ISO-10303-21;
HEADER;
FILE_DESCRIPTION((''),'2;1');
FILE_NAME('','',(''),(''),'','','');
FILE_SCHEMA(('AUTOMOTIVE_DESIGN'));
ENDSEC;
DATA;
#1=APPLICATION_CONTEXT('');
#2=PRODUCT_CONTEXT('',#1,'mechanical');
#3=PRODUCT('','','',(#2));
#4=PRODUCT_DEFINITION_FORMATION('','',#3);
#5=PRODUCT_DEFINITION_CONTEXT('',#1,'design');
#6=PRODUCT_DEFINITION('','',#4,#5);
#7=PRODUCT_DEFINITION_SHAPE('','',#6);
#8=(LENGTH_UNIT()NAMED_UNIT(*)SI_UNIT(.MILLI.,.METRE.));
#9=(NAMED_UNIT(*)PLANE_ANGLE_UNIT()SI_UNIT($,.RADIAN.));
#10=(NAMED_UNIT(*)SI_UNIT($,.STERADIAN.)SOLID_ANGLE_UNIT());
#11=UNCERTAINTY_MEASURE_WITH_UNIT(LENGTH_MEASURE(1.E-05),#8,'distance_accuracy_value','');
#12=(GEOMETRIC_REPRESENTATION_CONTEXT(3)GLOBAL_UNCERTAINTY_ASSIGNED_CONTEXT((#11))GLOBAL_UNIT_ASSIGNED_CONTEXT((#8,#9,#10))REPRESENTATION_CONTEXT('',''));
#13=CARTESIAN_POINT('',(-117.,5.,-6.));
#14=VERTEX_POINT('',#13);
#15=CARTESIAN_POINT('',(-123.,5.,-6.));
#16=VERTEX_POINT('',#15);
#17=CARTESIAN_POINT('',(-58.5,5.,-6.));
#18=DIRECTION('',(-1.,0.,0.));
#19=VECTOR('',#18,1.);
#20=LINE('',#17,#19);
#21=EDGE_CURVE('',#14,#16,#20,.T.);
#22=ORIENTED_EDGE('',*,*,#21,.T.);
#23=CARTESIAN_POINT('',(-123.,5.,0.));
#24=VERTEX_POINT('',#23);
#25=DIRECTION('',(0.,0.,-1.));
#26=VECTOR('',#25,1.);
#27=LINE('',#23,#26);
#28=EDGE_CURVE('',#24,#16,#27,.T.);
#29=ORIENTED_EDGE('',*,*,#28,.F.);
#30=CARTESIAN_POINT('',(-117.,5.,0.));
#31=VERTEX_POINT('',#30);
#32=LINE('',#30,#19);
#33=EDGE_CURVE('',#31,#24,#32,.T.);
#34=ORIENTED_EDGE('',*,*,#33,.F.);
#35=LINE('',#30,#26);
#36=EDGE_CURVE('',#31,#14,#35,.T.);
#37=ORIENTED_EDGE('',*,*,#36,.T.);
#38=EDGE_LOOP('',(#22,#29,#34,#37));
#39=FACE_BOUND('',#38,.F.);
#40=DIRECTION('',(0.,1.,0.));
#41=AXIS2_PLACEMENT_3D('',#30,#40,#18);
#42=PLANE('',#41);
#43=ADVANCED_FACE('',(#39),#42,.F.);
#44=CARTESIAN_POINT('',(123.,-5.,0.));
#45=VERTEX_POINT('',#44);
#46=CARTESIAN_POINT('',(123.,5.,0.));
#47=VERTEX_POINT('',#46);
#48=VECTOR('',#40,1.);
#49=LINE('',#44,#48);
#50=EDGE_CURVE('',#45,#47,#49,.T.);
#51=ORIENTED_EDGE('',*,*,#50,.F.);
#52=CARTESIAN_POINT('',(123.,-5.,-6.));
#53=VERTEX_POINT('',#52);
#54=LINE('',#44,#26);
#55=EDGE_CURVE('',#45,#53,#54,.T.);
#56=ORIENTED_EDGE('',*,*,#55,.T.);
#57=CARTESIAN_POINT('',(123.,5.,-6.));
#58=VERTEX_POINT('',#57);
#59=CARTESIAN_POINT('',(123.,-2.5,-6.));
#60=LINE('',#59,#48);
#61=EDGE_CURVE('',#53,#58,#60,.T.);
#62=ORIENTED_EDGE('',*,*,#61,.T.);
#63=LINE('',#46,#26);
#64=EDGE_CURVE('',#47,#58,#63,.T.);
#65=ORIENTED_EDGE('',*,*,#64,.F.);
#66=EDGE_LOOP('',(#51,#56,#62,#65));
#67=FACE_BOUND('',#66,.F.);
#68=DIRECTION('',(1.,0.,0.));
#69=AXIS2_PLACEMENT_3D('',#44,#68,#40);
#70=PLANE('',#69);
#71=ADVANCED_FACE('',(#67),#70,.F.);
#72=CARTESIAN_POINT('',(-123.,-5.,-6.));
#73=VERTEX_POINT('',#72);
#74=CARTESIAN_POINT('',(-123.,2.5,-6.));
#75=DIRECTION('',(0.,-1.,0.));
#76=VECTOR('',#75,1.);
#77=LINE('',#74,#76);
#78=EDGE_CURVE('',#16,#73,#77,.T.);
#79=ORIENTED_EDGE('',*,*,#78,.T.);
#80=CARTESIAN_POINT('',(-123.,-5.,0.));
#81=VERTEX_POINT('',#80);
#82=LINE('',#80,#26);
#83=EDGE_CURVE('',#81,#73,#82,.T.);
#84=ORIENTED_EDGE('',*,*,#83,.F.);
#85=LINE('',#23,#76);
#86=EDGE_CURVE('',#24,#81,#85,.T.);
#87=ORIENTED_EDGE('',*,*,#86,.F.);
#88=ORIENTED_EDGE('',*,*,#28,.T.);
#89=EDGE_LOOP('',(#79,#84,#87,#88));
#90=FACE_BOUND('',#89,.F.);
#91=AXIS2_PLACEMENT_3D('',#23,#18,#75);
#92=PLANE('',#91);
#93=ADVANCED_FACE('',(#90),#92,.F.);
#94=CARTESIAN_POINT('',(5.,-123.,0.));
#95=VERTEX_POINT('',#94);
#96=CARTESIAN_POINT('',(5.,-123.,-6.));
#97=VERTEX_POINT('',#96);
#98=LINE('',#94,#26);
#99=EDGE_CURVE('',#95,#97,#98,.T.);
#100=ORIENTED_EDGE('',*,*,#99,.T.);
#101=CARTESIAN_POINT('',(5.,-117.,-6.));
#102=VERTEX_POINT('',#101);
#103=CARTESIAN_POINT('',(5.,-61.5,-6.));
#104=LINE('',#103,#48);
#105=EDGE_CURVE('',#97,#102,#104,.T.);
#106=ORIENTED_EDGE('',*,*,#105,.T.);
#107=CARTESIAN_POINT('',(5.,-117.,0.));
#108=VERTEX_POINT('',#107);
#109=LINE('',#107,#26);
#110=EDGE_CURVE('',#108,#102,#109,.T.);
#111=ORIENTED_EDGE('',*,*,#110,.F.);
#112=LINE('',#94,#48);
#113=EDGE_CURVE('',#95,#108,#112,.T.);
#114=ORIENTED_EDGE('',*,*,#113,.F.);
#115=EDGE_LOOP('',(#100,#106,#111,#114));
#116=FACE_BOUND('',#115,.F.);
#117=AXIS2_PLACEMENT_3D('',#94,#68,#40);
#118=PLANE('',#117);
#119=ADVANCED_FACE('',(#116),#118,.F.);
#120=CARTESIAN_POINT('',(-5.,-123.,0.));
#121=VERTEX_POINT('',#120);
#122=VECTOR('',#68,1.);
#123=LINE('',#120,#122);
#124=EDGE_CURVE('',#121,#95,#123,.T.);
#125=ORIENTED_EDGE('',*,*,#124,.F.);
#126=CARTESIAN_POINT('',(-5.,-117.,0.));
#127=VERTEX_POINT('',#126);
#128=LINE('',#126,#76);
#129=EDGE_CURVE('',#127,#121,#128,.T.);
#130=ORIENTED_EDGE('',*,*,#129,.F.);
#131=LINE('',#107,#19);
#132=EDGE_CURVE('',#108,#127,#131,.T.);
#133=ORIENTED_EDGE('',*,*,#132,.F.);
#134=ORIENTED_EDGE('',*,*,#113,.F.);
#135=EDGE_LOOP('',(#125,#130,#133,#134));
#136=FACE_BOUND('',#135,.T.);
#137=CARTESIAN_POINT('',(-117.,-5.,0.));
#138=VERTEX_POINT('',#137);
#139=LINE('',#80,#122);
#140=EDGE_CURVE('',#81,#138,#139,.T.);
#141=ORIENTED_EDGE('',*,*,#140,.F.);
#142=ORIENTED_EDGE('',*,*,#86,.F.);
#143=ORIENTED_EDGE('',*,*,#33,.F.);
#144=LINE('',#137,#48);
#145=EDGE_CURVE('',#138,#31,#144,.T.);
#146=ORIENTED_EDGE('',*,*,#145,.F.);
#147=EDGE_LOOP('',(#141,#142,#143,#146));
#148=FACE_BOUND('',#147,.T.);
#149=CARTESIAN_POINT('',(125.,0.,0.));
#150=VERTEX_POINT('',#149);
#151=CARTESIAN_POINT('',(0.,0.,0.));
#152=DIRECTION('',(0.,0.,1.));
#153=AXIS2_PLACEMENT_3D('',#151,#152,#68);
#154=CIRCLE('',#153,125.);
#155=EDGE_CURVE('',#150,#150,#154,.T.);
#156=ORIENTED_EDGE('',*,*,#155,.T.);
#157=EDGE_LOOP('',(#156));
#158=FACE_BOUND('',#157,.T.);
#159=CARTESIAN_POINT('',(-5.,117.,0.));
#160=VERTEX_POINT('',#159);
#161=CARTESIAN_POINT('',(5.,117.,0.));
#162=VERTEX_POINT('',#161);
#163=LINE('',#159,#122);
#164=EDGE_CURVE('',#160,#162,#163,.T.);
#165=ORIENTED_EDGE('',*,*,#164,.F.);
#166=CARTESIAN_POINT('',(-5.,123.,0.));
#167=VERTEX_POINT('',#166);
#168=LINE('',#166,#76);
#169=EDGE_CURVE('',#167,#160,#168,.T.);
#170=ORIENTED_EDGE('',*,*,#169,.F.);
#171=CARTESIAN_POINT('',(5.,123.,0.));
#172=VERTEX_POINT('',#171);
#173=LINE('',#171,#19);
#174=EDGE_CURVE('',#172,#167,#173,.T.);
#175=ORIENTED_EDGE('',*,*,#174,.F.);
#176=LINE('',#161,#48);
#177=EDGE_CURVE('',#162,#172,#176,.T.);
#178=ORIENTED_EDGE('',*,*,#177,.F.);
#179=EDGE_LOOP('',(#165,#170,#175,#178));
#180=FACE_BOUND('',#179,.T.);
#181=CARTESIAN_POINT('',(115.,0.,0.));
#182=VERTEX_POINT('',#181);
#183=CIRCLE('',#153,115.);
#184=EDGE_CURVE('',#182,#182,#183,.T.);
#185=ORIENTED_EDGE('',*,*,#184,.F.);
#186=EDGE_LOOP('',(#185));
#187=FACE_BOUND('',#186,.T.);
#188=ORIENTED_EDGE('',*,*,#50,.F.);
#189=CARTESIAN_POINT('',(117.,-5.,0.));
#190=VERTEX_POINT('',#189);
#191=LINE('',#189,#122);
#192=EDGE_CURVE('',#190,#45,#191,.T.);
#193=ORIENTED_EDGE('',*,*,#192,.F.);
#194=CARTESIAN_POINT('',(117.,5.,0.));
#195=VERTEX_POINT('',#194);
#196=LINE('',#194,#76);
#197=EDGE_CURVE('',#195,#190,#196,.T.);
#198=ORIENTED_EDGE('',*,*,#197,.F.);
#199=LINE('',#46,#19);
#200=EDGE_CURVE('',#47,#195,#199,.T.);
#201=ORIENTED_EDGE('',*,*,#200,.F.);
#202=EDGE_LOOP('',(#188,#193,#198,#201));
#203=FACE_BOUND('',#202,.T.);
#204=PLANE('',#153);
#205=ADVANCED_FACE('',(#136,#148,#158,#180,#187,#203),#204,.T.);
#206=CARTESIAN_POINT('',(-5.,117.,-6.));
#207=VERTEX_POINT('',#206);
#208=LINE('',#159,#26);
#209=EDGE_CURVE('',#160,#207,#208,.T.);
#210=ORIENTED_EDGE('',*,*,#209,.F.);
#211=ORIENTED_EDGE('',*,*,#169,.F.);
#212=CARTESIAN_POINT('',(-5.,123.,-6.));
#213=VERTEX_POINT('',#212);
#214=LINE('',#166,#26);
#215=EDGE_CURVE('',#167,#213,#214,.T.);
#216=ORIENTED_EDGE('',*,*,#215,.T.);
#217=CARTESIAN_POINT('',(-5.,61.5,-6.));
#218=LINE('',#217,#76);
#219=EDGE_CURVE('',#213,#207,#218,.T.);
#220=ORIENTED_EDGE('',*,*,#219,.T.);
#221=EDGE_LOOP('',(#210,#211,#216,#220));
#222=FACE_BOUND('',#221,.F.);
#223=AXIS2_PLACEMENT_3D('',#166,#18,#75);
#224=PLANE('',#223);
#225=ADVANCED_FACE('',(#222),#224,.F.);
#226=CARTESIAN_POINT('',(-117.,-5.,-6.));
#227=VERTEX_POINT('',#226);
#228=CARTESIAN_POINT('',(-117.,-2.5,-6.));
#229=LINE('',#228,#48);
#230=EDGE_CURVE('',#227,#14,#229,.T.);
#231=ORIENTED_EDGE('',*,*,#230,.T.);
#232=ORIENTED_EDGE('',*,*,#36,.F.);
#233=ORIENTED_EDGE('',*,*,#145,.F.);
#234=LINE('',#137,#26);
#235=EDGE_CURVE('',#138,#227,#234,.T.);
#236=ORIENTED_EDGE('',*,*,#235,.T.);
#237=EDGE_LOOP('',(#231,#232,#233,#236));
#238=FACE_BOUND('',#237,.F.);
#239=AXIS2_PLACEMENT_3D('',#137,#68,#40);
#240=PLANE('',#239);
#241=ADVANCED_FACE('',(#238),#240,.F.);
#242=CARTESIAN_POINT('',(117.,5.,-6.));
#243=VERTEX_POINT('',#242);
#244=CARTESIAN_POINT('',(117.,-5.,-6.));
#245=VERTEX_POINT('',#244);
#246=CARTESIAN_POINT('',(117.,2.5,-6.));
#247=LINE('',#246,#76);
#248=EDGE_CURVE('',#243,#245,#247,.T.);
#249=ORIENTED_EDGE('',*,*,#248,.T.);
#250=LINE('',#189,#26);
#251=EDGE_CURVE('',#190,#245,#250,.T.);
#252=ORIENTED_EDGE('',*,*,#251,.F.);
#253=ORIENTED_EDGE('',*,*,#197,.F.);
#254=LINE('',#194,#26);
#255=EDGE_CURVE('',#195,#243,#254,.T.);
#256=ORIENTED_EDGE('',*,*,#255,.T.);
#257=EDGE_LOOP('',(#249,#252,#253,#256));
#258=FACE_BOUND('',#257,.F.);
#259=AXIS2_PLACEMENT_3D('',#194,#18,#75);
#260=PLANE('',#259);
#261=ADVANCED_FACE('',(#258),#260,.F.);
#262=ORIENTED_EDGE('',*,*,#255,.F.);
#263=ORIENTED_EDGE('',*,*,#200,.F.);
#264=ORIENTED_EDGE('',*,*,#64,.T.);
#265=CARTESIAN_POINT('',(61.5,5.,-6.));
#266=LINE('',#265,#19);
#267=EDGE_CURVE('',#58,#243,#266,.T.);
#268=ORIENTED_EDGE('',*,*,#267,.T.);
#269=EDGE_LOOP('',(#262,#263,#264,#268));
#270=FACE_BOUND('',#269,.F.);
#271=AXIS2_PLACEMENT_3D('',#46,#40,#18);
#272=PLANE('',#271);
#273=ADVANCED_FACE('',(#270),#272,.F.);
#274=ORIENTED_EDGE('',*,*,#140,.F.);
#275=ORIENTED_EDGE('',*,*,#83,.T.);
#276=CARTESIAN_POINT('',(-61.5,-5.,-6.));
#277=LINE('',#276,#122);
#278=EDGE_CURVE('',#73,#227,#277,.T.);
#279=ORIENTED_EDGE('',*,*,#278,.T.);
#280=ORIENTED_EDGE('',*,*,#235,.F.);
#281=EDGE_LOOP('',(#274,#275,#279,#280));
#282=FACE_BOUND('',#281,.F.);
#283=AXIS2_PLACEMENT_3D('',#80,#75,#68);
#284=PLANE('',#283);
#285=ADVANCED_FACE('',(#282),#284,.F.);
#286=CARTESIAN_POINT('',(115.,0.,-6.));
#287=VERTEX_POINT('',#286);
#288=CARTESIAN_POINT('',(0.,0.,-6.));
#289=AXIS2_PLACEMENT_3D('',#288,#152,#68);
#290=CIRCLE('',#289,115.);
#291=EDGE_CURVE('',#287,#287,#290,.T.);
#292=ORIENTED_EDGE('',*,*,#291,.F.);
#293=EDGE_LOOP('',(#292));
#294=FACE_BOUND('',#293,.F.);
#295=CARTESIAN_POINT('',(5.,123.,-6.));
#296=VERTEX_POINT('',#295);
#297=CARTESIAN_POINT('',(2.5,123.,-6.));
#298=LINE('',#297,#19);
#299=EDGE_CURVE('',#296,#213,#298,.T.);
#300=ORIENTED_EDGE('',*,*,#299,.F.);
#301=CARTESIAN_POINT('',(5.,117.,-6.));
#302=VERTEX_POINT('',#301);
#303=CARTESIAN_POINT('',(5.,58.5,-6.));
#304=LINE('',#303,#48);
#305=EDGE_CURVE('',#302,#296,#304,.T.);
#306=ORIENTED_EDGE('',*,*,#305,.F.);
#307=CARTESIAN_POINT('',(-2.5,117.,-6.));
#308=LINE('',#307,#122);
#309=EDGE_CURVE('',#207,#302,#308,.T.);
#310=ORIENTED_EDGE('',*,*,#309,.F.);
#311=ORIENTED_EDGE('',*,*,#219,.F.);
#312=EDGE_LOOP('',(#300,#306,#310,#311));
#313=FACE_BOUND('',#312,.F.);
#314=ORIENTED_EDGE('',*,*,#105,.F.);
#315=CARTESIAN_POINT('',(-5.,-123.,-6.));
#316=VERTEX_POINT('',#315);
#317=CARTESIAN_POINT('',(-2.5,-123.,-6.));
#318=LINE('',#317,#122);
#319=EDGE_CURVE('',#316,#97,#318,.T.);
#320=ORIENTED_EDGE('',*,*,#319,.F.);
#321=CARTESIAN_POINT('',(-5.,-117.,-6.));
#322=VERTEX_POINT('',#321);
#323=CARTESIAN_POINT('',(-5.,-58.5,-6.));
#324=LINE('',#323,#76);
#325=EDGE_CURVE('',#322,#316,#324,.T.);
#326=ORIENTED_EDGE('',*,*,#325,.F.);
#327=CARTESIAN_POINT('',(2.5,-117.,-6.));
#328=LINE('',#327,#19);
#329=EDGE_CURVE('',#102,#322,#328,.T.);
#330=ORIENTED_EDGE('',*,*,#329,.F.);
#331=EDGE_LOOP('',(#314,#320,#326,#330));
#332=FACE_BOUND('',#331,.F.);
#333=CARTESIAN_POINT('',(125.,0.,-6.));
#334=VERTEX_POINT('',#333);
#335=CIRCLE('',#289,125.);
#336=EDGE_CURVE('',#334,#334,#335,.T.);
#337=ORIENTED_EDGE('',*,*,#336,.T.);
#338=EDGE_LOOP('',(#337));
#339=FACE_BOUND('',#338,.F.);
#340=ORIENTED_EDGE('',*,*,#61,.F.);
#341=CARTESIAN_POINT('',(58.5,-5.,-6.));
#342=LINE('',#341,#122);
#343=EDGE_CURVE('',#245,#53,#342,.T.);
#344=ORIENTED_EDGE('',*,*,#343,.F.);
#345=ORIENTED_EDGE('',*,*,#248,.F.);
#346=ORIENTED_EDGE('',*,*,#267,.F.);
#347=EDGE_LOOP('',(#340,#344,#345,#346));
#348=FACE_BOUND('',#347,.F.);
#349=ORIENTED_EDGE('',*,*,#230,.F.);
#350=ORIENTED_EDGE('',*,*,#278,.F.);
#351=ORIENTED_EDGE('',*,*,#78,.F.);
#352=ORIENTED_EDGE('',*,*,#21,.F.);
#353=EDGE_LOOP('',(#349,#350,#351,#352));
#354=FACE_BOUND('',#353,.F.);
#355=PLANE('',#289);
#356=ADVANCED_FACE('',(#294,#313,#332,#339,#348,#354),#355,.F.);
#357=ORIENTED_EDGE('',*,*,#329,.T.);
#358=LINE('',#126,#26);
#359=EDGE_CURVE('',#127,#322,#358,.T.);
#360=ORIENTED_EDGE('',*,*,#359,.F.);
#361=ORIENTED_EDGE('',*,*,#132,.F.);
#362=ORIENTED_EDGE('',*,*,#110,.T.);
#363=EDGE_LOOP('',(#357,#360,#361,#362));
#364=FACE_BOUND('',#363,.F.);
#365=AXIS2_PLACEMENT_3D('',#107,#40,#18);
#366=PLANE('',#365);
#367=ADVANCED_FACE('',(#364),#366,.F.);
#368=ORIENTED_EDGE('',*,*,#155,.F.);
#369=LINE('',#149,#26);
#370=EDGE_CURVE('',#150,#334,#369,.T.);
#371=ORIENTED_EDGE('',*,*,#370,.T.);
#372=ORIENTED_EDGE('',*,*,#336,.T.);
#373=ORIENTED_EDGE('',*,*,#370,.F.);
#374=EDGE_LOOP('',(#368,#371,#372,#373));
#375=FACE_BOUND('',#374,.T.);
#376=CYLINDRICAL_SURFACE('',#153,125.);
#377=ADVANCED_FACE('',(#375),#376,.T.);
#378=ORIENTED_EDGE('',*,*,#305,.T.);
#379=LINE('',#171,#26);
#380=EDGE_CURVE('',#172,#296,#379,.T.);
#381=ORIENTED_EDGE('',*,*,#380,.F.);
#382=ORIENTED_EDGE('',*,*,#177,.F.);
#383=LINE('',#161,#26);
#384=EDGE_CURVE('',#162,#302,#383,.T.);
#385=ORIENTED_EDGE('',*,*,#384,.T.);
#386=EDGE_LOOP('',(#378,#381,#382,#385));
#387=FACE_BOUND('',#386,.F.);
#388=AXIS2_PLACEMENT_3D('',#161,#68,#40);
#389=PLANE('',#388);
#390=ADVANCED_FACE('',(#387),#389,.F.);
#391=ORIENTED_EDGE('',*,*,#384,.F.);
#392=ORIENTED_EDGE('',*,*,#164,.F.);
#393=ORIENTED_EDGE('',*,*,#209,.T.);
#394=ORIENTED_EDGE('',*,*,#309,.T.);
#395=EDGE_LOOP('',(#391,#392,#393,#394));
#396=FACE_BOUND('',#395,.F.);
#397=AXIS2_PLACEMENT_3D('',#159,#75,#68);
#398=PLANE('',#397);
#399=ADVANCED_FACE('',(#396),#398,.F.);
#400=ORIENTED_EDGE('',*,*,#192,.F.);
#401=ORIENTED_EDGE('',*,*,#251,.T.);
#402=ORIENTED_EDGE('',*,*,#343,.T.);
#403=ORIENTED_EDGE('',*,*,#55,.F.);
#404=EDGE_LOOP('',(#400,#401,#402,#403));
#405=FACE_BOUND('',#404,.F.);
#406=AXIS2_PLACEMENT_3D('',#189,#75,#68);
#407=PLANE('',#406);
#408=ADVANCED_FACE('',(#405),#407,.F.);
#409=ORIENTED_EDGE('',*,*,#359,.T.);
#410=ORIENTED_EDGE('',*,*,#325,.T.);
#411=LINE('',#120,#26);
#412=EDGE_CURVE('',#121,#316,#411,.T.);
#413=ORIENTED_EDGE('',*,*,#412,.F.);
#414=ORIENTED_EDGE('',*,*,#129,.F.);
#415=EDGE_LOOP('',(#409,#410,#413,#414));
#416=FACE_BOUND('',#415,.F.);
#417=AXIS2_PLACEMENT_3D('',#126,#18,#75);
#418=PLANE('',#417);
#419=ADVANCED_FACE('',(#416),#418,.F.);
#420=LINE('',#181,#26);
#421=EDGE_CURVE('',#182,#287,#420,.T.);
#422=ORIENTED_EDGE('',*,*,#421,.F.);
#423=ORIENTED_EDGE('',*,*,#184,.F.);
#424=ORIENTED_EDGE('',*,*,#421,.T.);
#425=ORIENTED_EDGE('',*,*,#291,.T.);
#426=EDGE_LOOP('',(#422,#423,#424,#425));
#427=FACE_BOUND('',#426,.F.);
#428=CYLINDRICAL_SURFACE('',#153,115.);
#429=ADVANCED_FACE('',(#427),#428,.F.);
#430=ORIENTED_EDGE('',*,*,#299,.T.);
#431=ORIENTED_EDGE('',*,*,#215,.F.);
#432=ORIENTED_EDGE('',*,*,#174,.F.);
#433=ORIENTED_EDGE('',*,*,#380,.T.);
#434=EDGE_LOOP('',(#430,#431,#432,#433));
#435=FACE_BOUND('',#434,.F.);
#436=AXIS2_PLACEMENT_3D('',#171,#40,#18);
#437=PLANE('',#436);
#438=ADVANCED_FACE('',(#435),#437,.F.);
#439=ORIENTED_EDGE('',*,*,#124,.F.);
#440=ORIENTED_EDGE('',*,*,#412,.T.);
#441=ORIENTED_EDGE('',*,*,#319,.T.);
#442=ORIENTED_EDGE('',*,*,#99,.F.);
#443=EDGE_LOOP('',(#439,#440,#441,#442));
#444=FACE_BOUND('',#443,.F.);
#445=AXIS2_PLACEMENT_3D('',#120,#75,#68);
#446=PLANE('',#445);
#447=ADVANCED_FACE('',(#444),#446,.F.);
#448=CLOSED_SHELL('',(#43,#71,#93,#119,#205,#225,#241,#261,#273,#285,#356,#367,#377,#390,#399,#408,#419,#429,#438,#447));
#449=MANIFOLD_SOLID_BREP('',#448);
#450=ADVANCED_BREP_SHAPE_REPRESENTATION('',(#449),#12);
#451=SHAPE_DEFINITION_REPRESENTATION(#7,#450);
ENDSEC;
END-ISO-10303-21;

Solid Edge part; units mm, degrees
sketch "Sketch1" plane through (0, 0, 0) normal (0, 0, 1) x (1, 0, 0)
  circle A0 centre (0, 0) radius 125
  dimension "D1" = 250
extrude "Protrusion1" add sketch "Sketch1" against normal blind 6
sketch "Sketch2" plane through (0, 0, 0) normal (0, 0, 1) x (1, 0, 0)
  circle A0 centre (0, 0) radius 115
  dimension "D1" = 230
extrude "Cutout1" cut sketch "Sketch2" against normal through all
sketch "Sketch3" plane through (0, 0, 0) normal (0, 0, 1) x (1, 0, 0)
  line L0 (-5, 117) -> (5, 117)
  line L1 (5, 117) -> (5, 123)
  line L2 (5, 123) -> (-5, 123)
  line L3 (-5, 123) -> (-5, 117)
  dimension "D1" = 10
  dimension "D2" = 6
  dimension "D3" = 117
extrude "Cutout2" cut sketch "Sketch3" against normal through all
pattern_circular "Pattern1" count 4 over 360 about axis through (0, 0, 0) along (0, 0, -1) of "Cutout2"
properties material "Wood, Mahogany"
